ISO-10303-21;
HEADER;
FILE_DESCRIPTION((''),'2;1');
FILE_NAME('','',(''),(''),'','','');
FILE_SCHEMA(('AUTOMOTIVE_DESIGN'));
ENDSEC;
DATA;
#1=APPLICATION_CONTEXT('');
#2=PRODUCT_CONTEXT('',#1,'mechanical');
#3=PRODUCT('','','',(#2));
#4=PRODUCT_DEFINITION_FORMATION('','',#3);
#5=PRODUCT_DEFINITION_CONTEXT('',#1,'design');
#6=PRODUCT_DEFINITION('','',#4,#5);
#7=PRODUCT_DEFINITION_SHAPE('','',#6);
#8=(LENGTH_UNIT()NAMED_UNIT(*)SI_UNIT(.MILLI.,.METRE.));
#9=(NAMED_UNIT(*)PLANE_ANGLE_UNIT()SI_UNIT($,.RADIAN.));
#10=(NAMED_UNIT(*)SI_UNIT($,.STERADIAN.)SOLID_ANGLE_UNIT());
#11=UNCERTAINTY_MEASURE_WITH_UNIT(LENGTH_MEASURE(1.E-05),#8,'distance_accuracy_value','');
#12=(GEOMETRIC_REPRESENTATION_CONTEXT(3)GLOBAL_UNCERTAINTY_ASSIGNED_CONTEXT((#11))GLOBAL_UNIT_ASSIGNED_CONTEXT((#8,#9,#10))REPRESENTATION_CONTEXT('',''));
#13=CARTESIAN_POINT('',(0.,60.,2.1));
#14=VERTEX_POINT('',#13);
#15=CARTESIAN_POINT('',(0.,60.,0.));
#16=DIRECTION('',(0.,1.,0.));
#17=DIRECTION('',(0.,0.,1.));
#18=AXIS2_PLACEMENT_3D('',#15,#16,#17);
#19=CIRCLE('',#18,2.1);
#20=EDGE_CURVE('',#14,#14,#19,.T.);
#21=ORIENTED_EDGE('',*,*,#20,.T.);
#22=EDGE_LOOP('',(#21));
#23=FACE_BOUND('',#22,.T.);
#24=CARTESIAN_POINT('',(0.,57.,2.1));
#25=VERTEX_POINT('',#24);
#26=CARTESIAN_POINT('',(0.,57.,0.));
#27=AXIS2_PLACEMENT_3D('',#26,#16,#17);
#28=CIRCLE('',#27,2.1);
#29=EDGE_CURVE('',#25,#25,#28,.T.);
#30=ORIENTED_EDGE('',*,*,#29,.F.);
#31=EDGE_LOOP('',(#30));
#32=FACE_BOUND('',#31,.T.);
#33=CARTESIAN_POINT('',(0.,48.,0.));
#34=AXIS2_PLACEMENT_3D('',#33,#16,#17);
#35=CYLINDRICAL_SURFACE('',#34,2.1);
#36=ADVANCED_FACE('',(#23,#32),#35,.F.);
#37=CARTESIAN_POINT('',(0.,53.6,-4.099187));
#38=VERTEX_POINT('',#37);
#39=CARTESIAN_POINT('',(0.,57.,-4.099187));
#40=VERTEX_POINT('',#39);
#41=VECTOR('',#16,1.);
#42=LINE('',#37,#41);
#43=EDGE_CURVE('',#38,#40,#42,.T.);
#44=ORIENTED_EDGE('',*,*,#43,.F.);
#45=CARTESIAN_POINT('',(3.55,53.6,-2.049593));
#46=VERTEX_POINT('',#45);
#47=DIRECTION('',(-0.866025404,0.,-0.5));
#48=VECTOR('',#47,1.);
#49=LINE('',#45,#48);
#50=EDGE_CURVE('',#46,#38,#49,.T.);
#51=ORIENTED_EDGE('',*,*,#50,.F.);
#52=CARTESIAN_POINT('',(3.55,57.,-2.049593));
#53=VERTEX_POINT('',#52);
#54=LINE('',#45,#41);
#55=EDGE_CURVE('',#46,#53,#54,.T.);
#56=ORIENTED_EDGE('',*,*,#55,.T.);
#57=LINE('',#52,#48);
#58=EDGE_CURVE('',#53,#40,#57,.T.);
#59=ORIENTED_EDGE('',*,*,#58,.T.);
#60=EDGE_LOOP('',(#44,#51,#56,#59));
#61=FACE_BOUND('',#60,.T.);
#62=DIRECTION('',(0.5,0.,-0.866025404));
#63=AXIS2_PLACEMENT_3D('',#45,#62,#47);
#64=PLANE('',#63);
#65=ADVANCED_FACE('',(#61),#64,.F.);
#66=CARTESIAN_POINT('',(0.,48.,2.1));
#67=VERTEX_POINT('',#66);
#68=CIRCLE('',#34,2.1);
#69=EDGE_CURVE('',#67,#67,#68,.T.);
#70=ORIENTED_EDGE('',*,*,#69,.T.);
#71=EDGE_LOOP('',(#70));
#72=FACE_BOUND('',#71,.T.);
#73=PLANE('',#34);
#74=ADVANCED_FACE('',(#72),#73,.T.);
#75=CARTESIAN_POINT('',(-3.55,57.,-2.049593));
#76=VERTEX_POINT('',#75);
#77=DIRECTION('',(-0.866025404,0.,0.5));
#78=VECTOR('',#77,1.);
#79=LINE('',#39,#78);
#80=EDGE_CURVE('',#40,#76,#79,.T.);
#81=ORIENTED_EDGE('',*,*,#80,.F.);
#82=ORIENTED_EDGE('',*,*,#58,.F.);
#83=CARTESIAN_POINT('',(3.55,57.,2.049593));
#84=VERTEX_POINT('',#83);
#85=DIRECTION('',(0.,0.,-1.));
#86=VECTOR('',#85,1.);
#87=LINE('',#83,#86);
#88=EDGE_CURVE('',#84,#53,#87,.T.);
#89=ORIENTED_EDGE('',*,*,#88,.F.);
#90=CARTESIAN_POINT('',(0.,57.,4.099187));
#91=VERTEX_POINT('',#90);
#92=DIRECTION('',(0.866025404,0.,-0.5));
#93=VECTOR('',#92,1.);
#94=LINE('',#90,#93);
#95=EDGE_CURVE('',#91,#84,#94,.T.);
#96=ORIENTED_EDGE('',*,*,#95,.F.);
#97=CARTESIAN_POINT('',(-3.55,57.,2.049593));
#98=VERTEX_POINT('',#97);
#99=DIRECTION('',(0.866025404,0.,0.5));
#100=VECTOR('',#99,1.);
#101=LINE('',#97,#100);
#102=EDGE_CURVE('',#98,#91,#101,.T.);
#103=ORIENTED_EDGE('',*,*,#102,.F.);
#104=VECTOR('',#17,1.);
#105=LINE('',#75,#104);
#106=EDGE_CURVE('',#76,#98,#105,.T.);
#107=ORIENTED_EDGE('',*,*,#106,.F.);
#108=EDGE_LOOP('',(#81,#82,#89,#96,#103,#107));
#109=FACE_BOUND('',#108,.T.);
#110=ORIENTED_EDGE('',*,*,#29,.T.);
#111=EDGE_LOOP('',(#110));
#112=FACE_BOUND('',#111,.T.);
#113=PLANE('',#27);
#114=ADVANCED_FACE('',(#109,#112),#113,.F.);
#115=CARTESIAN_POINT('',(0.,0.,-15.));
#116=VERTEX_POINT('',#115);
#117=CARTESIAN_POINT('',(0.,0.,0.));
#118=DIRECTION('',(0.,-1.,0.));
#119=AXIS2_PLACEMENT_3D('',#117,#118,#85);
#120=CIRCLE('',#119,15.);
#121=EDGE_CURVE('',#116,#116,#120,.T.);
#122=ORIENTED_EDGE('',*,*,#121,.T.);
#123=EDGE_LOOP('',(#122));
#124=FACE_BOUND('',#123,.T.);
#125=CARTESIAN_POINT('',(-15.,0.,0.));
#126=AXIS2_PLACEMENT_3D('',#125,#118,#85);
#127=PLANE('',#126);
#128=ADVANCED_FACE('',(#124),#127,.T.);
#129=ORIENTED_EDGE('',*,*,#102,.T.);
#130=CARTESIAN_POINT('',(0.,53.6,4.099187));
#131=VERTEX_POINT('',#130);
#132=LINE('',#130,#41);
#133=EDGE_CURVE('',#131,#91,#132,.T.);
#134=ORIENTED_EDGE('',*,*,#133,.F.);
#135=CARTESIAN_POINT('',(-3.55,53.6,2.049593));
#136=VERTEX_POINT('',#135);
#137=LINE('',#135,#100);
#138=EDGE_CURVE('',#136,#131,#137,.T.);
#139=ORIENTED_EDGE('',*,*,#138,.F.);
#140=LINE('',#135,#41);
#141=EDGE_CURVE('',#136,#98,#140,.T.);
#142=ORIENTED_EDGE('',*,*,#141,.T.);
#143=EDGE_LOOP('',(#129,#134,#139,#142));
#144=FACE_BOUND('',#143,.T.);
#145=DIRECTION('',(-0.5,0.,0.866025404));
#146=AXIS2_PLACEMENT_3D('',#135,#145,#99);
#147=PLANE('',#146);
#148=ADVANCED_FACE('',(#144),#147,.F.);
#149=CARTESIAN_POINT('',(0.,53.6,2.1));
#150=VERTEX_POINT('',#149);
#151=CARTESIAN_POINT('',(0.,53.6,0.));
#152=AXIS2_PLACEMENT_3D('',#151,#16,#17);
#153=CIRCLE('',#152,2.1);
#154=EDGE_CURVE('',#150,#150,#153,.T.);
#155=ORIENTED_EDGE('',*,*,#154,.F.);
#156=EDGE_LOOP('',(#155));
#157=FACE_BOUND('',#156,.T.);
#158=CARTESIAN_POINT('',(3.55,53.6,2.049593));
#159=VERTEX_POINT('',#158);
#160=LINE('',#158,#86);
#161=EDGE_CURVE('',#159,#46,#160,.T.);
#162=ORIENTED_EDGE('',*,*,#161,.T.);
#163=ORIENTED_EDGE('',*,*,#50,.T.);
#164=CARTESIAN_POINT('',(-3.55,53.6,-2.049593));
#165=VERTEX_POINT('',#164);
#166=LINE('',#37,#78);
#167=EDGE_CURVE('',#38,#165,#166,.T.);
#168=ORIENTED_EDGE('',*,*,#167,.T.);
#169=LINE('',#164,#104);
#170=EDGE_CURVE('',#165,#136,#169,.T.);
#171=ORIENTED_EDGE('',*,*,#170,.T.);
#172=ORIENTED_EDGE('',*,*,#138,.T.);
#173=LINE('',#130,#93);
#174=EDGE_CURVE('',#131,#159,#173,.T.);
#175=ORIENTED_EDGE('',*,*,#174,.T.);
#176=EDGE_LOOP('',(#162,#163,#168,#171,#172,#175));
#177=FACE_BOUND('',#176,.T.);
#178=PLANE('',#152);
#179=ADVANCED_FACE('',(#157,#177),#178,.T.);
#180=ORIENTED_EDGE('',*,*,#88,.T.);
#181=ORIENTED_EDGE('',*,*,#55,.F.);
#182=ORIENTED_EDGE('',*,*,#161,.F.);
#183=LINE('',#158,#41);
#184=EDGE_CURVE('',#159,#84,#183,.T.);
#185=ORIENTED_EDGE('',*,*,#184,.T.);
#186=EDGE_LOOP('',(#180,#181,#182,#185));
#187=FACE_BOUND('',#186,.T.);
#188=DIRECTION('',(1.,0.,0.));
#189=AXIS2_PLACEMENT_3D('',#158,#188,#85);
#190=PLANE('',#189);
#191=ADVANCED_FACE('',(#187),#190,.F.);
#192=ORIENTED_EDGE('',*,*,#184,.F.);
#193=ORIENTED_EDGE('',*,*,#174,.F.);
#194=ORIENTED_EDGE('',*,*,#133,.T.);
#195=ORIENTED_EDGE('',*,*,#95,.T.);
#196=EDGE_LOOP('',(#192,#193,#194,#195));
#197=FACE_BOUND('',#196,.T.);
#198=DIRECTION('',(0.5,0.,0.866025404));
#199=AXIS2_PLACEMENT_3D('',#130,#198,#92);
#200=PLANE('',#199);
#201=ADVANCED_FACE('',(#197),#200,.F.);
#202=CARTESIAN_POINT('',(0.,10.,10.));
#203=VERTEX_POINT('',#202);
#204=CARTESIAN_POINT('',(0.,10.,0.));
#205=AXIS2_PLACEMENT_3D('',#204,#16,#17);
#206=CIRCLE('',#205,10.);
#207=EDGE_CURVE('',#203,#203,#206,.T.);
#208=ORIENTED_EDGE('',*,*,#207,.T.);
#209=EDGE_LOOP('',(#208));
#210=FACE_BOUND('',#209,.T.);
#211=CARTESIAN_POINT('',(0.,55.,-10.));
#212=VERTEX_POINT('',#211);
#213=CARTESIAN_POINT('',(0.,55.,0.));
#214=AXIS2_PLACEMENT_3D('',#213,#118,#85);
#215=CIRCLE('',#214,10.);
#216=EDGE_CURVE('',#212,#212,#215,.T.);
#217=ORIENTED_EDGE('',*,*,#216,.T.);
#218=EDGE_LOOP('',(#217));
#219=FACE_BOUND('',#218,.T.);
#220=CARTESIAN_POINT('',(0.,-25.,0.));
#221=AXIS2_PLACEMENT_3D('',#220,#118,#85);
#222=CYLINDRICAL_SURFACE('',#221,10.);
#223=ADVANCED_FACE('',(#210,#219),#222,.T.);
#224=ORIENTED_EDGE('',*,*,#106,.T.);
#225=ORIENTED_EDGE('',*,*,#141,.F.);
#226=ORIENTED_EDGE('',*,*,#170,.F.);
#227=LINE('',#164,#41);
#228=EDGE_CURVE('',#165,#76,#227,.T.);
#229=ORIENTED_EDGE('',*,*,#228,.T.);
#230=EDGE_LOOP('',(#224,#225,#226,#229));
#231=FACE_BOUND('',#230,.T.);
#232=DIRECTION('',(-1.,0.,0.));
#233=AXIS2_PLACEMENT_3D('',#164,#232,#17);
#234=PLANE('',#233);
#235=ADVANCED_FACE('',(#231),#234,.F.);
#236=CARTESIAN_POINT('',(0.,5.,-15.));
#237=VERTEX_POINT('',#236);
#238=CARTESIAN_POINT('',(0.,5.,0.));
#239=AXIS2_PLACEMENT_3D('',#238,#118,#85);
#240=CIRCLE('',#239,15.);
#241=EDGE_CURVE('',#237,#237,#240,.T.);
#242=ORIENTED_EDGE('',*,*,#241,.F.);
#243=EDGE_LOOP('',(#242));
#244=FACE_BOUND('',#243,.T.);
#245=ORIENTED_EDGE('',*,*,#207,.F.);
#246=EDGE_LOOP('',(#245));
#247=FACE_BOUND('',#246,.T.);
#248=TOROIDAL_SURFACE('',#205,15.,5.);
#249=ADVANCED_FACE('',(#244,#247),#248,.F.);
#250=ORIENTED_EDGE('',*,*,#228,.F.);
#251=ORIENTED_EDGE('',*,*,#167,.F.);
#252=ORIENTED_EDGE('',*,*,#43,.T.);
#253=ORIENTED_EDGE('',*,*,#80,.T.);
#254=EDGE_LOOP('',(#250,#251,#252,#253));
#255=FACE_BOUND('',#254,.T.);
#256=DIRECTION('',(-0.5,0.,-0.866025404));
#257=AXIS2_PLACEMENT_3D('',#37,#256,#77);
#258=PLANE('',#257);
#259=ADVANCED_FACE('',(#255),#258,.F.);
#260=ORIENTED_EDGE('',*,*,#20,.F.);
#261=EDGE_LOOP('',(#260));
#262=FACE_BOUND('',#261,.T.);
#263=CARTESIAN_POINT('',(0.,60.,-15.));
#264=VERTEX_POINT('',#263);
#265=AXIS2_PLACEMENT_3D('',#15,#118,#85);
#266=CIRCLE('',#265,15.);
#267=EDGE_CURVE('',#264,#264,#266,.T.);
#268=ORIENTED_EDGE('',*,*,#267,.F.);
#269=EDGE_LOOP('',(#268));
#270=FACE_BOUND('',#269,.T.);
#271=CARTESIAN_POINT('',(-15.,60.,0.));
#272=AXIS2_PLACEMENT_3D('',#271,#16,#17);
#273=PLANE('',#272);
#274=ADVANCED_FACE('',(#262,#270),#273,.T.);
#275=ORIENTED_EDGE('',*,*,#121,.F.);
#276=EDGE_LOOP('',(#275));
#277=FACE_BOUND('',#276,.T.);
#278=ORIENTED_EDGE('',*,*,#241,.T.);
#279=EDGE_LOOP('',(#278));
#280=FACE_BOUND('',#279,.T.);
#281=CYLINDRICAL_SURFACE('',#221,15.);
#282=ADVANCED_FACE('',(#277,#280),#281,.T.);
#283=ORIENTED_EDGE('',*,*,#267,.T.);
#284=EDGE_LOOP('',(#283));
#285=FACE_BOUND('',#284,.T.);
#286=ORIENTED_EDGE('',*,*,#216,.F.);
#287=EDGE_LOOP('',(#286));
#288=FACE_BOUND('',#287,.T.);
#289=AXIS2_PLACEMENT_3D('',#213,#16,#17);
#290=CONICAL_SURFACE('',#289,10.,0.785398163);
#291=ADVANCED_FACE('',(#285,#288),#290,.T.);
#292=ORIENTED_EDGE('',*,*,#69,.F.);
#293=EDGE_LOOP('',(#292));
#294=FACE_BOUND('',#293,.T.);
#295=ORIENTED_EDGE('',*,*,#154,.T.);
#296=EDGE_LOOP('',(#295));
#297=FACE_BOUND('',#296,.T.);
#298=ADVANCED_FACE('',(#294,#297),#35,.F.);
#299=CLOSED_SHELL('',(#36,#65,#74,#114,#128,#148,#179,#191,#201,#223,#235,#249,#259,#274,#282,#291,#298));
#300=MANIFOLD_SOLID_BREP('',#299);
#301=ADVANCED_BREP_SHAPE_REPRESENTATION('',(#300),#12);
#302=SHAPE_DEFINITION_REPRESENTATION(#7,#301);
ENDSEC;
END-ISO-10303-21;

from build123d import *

# Parameters (mm, degrees)
FILLET1_R          = 5
CUT_EXTRUDE1_START = -3
CUT_EXTRUDE1_DEPTH = 3.4
SKETCH3_R          = 2.1
CUT_EXTRUDE2_DEPTH = 12
CHAMFER1_SIZE      = 5


# Read off the part's stored shape, not the designer's step: Revolve-Thin2
with BuildPart() as part:
    # Revolve-Thin2 outline → Revolve-Thin2 (revolve)
    with BuildSketch(Plane.XY):
        Polygon((0, 60), (0, 0), (15, 0), (15, 5), (10, 5), (10, 55), (15, 55), (15, 60), align=None)
    revolve(axis=Axis((0, 0, 0), (0, 1, 0)))

    # Fillet1
    fillet1_edges = [part.edges().sort_by_distance(p)[0] for p in [
        (-10, 5, 0),
    ]]
    fillet(fillet1_edges, radius=FILLET1_R - 0.0001)  # a hair under: the kernel refuses the full size

    # Sketch2 → Cut-Extrude1 (cut)
    with BuildSketch(Plane(origin=(0, 60, 0), x_dir=(1, 0, 0), z_dir=(0, 1, 0)).offset(CUT_EXTRUDE1_START)):
        Polygon((0, 4.099186911), (-3.55, 2.049593456), (-3.55, -2.049593456), (0, -4.099186911), (3.55, -2.049593456), (3.55, 2.049593456), align=None)
    extrude(amount=-CUT_EXTRUDE1_DEPTH, mode=Mode.SUBTRACT)

    # Sketch3 → Cut-Extrude2 (cut)
    with BuildSketch(Plane(origin=(0, 60, 0), x_dir=(1, 0, 0), z_dir=(0, 1, 0))):
        with Locations(Location((0, 0, 0), (0, 0, 270))):
            Circle(SKETCH3_R)
    extrude(amount=-CUT_EXTRUDE2_DEPTH, mode=Mode.SUBTRACT)

    # Chamfer1
    chamfer1_edges = [part.edges().sort_by_distance(p)[0] for p in [
        (-15, 55, 0),
    ]]
    chamfer(chamfer1_edges, length=CHAMFER1_SIZE - 0.0001)  # a hair under: the kernel refuses the full size


solid = part.part
